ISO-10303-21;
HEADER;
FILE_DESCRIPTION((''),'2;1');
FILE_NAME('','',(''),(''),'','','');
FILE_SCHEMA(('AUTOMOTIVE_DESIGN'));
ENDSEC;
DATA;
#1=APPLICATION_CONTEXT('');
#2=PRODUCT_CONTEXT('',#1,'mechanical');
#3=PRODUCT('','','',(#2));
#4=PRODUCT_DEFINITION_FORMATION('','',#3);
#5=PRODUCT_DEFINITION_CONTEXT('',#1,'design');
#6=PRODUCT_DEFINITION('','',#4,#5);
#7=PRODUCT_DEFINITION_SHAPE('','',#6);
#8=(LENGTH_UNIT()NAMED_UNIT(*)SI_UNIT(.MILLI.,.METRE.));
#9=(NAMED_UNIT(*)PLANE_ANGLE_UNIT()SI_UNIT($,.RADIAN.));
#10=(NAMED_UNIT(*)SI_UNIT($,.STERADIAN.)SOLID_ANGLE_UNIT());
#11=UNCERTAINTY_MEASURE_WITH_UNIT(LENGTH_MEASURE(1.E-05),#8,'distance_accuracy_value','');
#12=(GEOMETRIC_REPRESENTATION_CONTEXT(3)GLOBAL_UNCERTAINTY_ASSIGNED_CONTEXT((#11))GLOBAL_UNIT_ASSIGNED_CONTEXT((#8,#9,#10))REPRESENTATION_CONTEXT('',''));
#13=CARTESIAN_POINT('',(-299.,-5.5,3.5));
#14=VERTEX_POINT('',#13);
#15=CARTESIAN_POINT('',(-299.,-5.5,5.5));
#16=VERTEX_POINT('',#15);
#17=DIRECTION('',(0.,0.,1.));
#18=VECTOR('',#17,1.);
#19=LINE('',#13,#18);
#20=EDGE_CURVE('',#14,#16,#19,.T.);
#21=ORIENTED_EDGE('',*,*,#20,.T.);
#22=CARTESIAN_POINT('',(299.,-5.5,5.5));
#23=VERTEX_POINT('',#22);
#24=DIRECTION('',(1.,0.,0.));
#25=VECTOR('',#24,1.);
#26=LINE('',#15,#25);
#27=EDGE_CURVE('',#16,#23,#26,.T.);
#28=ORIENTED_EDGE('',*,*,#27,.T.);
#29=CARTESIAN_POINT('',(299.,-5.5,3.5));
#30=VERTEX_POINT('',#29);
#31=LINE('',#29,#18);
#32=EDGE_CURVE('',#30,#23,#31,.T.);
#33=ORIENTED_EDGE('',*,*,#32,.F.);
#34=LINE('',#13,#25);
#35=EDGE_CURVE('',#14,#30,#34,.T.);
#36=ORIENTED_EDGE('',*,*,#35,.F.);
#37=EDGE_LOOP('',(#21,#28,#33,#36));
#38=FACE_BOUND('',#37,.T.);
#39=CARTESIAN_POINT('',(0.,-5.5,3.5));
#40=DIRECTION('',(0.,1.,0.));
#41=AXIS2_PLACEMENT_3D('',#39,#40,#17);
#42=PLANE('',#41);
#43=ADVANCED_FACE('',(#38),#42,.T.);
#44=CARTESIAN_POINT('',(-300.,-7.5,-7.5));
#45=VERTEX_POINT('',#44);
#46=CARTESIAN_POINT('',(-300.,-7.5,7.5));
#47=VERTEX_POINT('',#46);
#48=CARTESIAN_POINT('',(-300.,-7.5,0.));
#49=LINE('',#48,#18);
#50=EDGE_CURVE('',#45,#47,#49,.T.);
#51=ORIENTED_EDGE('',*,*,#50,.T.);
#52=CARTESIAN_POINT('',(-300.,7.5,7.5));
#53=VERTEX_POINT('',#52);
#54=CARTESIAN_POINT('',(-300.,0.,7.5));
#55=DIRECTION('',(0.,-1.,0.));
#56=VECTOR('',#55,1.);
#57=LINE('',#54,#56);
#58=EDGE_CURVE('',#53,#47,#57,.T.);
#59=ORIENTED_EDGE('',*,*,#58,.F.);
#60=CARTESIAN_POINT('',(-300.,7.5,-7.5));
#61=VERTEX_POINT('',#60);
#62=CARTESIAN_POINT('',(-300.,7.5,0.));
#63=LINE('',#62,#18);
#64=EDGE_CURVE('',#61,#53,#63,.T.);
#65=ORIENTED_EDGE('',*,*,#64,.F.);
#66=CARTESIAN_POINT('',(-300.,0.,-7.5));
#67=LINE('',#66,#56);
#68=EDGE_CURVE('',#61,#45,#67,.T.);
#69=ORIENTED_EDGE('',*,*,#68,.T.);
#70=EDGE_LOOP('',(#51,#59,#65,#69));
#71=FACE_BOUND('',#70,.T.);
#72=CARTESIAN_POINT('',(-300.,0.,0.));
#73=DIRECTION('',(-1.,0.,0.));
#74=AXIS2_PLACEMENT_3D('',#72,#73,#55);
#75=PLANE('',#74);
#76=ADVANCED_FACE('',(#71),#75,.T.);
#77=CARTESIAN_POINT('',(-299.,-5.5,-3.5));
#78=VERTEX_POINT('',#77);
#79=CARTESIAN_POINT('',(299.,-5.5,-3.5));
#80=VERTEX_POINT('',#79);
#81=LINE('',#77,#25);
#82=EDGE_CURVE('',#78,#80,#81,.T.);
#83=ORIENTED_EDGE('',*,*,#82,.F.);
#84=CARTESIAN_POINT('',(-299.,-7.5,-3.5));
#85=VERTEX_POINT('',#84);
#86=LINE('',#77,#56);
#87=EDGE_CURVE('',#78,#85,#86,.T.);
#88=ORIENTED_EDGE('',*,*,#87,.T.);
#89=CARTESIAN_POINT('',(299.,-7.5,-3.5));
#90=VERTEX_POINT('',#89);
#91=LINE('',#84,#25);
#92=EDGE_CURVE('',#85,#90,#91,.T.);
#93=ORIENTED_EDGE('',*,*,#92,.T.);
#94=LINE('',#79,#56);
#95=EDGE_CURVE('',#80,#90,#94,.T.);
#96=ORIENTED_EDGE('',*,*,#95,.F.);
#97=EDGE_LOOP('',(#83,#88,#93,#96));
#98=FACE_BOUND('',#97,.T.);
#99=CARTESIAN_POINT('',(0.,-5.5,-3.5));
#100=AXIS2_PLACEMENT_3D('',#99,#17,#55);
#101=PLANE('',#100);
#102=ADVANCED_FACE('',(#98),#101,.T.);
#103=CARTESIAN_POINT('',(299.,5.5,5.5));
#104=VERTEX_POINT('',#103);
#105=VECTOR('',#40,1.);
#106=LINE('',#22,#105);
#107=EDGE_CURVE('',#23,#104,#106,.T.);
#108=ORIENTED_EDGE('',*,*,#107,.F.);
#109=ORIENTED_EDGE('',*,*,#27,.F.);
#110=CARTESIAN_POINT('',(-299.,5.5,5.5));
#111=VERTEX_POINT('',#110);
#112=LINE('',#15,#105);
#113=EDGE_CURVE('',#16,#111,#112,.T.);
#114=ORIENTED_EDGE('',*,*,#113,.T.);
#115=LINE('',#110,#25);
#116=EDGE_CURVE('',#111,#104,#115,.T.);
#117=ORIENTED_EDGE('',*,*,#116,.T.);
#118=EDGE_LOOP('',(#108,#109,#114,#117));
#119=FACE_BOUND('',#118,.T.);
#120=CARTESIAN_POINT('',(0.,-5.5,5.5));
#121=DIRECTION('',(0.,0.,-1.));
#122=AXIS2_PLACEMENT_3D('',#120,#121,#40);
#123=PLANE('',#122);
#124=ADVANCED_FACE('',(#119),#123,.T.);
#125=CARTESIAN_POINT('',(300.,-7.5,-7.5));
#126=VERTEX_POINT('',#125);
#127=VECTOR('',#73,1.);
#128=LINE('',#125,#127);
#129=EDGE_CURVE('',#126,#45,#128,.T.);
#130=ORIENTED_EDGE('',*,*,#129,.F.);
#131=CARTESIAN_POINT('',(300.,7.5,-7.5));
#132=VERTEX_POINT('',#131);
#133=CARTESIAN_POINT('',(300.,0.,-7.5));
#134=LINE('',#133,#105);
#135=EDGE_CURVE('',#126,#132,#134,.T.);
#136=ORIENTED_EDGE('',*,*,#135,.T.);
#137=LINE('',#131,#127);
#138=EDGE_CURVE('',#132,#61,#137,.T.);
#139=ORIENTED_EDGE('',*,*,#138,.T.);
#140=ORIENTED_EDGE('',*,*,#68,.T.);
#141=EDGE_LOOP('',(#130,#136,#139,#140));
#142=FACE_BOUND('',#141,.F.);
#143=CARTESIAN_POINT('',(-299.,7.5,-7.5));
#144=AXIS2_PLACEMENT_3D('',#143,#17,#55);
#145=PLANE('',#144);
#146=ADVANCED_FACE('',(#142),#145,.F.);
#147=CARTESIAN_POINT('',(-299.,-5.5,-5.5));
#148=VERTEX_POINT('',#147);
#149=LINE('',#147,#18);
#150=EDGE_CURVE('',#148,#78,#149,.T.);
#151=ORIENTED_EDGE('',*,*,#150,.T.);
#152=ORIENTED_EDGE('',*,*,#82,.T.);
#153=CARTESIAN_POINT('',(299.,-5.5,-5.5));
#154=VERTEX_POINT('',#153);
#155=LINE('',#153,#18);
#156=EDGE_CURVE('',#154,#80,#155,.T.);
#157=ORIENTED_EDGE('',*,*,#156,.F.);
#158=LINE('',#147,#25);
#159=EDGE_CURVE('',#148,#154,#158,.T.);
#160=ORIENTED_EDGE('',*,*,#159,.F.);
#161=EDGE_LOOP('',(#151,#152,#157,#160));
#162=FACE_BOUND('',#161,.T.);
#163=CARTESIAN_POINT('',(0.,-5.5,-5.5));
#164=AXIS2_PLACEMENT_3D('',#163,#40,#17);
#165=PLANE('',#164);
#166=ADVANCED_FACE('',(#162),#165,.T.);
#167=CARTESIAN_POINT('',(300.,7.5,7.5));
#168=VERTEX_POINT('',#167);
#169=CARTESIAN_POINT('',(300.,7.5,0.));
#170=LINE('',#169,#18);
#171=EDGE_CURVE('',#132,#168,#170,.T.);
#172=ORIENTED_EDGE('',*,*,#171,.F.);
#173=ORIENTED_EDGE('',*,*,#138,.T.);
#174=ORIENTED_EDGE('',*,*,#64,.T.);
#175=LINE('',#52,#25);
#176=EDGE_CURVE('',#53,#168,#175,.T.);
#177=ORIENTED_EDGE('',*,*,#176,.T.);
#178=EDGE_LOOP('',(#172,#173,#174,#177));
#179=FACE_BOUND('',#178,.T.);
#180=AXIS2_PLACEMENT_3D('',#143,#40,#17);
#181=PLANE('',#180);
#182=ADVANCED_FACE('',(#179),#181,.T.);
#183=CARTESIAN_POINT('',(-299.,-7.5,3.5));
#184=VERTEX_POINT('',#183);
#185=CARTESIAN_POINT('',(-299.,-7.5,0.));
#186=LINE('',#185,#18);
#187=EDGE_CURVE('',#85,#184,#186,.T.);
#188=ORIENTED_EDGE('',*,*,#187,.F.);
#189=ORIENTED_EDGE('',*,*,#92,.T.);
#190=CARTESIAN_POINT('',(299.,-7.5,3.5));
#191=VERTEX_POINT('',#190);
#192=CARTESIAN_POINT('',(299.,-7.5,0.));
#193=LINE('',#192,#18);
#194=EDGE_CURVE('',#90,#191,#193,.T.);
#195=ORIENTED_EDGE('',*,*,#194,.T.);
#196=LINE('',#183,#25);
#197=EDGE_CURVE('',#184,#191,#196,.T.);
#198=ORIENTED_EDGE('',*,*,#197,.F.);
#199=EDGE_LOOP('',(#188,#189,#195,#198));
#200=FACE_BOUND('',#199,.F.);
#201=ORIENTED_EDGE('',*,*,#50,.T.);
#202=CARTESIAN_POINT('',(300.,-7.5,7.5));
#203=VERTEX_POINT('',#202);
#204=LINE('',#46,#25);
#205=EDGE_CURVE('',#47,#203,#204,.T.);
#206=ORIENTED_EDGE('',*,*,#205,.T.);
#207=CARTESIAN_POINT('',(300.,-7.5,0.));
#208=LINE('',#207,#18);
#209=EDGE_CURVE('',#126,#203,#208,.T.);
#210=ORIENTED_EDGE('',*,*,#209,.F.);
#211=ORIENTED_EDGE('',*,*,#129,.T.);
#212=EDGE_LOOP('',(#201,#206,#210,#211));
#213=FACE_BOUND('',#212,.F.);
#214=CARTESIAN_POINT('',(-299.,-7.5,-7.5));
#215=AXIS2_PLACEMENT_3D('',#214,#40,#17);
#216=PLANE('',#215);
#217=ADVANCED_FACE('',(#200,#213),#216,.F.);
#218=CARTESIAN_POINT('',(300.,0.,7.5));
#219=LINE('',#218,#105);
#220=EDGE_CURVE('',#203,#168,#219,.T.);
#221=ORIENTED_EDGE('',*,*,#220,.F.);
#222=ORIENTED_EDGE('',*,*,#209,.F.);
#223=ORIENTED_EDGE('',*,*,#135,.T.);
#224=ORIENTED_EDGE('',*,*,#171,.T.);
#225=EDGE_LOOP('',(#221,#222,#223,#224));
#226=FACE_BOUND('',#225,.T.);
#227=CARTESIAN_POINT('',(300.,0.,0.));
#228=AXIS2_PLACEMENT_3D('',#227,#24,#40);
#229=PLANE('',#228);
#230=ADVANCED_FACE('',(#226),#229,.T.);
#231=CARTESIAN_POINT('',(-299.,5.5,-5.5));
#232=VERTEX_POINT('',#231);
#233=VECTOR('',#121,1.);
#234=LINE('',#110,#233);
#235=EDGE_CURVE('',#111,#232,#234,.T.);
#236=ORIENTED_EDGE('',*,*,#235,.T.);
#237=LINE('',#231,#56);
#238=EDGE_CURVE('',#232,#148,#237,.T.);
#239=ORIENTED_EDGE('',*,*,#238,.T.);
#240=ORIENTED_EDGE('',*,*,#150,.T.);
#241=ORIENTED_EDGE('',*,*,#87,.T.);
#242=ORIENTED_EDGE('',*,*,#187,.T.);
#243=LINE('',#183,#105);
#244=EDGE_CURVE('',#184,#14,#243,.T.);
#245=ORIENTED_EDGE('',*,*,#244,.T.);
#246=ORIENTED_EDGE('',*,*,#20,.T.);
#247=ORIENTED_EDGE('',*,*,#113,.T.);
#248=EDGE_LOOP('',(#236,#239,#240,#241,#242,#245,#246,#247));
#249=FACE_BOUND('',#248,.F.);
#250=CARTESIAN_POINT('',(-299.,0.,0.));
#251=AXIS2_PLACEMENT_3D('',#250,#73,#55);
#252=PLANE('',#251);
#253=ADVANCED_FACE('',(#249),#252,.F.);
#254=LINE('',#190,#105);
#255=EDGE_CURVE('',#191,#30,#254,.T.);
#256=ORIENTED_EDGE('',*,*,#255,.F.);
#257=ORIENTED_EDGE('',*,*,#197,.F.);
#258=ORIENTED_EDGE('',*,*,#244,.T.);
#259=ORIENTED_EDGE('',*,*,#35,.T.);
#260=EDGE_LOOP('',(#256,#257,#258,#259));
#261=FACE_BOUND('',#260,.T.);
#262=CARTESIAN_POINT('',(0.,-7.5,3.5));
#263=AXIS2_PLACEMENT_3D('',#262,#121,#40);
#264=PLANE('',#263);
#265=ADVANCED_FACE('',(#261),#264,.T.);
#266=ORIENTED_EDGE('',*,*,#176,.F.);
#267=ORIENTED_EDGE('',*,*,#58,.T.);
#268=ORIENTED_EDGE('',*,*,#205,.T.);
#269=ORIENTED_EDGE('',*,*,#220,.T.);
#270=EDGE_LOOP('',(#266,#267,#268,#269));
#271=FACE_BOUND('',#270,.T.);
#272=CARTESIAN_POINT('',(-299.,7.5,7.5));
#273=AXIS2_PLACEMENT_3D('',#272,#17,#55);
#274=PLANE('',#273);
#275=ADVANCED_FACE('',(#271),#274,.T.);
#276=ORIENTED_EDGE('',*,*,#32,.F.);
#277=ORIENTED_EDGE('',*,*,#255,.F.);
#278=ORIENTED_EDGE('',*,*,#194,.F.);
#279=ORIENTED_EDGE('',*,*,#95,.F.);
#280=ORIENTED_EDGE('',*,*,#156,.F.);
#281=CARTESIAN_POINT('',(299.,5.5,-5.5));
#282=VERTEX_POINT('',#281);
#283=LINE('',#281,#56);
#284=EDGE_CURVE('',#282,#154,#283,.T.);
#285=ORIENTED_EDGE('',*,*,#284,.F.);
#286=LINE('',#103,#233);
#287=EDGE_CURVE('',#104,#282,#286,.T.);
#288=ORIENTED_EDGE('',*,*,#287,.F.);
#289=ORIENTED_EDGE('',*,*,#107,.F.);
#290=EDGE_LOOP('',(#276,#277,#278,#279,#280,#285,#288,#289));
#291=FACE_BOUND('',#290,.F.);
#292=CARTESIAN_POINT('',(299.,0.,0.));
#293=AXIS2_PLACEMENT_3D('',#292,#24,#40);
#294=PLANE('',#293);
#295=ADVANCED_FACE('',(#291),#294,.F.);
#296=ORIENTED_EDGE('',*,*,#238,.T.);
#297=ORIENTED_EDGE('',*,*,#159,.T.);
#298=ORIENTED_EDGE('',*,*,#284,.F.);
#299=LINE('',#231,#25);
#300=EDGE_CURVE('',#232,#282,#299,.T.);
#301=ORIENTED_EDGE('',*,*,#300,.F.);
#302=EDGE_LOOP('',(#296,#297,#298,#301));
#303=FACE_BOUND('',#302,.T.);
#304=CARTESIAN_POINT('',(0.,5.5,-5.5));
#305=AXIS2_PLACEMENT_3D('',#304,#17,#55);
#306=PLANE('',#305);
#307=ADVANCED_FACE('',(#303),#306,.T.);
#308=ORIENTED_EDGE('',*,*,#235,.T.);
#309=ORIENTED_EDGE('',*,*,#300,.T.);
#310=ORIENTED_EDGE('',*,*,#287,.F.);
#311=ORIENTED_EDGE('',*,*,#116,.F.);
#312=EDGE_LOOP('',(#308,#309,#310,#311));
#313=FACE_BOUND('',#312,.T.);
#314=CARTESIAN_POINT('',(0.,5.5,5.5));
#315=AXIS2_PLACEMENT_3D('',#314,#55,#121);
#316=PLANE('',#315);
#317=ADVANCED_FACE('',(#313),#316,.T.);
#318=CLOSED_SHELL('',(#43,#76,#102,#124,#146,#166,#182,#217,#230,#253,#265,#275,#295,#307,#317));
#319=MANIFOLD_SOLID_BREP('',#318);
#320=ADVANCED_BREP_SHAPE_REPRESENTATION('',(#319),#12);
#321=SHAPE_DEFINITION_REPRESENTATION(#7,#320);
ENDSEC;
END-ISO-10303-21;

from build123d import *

# Parameters (mm, degrees)
F1_DEPTH = 299
F3_W     = 15
F3_H     = 15
F4_DEPTH = 1
F6_W     = 15
F6_H     = 15
F7_DEPTH = 1


# Not quite as in the source:
# - the program builds the solid bodies; features that only make, move or delete a surface that nothing else refers to are left out


with BuildPart() as f1:
    # F0 (on Right) → F1 (new body, symmetric)
    with BuildSketch(Plane.YZ):
        Polygon((7.5, 7.5), (-7.5, 7.5), (-7.5, 3.5), (-5.5, 3.5), (-5.5, 5.5), (5.5, 5.5), (5.5, -5.5), (-5.5, -5.5), (-5.5, -3.5), (-7.5, -3.5), (-7.5, -7.5), (7.5, -7.5), align=None)
    extrude(amount=F1_DEPTH, both=True)

    # F3 (on offset) → F4 (join)
    with BuildSketch(Plane.YZ.offset(299)):
        Rectangle(F3_W, F3_H)
    extrude(amount=F4_DEPTH)

    # F6 (on offset) → F7 (join)
    with BuildSketch(Plane(origin=(-299, 0, 0), x_dir=(0, -1, 0), z_dir=(-1, 0, 0))):
        Rectangle(F6_W, F6_H)
    extrude(amount=F7_DEPTH)


solid = f1.part
